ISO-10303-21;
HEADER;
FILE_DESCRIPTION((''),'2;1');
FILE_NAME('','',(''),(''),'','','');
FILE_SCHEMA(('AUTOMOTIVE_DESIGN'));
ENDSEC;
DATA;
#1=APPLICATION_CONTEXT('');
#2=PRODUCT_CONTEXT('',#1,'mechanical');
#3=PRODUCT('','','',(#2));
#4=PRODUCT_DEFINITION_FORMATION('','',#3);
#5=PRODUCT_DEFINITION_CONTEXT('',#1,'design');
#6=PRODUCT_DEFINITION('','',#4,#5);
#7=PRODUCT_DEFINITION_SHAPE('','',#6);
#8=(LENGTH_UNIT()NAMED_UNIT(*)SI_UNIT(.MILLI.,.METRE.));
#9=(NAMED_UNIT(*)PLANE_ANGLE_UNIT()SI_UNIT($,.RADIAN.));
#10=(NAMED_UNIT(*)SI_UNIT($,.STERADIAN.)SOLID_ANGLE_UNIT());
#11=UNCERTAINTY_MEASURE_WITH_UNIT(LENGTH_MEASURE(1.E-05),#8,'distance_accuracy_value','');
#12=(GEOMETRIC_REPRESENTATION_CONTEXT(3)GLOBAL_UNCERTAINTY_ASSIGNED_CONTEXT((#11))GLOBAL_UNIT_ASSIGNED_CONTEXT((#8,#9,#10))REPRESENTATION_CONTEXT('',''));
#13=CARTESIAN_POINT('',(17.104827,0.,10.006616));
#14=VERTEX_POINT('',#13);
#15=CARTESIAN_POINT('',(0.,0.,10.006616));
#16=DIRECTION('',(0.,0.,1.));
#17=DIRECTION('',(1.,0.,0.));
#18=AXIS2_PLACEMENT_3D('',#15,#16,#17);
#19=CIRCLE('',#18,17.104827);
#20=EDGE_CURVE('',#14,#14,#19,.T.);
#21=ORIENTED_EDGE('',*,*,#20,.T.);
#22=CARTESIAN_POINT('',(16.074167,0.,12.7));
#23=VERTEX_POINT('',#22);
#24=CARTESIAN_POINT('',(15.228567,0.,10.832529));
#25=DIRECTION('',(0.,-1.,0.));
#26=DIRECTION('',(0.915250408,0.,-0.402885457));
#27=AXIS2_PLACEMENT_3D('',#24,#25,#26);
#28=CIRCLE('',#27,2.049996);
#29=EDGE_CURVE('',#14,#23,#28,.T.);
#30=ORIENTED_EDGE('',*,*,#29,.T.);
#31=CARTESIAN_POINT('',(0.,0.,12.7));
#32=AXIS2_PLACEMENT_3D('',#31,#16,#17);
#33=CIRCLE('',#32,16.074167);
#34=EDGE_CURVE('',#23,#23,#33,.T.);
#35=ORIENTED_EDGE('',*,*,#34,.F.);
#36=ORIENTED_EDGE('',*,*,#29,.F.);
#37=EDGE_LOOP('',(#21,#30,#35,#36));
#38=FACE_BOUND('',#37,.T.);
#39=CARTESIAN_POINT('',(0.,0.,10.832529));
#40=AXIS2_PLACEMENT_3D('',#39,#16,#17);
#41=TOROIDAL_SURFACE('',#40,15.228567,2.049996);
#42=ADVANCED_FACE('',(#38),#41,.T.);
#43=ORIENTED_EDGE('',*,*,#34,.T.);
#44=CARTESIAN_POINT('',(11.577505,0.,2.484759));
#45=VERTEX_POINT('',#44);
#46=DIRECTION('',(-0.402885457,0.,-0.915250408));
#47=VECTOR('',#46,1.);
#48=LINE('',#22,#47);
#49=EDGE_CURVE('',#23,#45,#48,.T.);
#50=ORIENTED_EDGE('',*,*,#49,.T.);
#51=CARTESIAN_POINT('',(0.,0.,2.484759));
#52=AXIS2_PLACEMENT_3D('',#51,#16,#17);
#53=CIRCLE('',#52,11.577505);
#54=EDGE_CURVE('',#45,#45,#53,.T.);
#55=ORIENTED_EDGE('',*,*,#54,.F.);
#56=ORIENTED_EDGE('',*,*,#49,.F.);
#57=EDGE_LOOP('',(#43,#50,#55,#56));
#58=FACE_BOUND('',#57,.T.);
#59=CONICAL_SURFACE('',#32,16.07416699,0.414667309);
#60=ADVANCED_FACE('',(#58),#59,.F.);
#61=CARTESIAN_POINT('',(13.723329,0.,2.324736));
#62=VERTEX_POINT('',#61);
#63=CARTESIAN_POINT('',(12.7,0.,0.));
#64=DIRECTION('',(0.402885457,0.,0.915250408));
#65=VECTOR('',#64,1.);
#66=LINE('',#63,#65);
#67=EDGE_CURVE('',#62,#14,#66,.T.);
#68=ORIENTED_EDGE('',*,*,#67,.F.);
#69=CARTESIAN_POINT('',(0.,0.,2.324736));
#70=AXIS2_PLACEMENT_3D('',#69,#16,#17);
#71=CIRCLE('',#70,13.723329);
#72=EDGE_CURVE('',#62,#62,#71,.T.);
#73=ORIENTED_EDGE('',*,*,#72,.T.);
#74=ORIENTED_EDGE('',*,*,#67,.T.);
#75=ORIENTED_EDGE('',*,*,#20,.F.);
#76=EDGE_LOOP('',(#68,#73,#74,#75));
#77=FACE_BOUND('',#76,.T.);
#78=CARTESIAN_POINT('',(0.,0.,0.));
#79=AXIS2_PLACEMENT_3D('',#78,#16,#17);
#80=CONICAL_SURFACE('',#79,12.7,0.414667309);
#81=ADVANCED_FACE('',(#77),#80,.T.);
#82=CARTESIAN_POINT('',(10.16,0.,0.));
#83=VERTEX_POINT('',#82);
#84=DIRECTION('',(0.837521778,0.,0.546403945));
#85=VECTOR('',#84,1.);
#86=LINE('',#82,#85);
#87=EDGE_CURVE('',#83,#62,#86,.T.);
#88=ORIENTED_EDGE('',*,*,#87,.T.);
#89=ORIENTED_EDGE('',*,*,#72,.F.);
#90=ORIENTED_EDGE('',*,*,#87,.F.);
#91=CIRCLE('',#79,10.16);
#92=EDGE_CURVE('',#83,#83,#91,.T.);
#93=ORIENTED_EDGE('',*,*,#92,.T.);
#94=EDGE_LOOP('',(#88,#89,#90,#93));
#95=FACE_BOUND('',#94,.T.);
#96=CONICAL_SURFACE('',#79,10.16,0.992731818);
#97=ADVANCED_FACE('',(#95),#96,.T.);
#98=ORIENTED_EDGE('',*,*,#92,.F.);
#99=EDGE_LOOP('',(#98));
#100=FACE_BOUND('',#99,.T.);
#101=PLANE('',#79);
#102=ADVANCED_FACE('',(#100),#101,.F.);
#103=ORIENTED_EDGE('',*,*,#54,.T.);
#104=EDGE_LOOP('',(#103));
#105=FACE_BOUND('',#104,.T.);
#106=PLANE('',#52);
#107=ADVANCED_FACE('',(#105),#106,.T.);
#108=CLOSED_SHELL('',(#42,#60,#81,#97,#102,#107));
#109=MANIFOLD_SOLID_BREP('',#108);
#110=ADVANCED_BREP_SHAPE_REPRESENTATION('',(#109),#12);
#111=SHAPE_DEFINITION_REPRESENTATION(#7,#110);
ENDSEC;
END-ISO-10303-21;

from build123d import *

# Parameters (mm, degrees)
F3_SIZE = 2.54


# Not quite as in the source:
# - a fillet or chamfer that OpenCascade refuses, or shapes differently, is made with other operations: its cross-section is extruded or revolved along the edge and cut away or added


with BuildPart() as f1:
    # F0 (on Front) → F1 (revolve)
    with BuildSketch(Plane.XZ):
        Polygon((0, 2.484759083), (0, 0), (12.7, 0), (18.2904321501, 12.7), (16.0741669896, 12.7), (11.577504687, 2.484759083), align=None)
    revolve(axis=Axis((0, 0, 10.5566112325), (0, 0, 1)))

    # F2: fillet of radius 2.0499963011 on 1 edges, made by hand

    # F2_s1 → F2_t2 (revolve, cut)
    with BuildSketch(Plane.XZ):
        with BuildLine():
            ThreePointArc((17.1048272979, 10.0066158002), (17.1431716206, 11.5651790127), (16.0741669896, 12.7))
            Line((16.0741669896, 12.7), (18.2904321501, 12.7))
            Line((18.2904321501, 12.7), (17.1048272979, 10.0066158002))
        make_face()
    revolve(axis=Axis((0, 0, 12.7), (0, 0, 1)), mode=Mode.SUBTRACT)

    # F3
    f3_edges = [f1.edges().sort_by_distance(p)[0] for p in [
        (-12.7, 0, 0),
    ]]
    chamfer(f3_edges, length=F3_SIZE)


solid = f1.part
